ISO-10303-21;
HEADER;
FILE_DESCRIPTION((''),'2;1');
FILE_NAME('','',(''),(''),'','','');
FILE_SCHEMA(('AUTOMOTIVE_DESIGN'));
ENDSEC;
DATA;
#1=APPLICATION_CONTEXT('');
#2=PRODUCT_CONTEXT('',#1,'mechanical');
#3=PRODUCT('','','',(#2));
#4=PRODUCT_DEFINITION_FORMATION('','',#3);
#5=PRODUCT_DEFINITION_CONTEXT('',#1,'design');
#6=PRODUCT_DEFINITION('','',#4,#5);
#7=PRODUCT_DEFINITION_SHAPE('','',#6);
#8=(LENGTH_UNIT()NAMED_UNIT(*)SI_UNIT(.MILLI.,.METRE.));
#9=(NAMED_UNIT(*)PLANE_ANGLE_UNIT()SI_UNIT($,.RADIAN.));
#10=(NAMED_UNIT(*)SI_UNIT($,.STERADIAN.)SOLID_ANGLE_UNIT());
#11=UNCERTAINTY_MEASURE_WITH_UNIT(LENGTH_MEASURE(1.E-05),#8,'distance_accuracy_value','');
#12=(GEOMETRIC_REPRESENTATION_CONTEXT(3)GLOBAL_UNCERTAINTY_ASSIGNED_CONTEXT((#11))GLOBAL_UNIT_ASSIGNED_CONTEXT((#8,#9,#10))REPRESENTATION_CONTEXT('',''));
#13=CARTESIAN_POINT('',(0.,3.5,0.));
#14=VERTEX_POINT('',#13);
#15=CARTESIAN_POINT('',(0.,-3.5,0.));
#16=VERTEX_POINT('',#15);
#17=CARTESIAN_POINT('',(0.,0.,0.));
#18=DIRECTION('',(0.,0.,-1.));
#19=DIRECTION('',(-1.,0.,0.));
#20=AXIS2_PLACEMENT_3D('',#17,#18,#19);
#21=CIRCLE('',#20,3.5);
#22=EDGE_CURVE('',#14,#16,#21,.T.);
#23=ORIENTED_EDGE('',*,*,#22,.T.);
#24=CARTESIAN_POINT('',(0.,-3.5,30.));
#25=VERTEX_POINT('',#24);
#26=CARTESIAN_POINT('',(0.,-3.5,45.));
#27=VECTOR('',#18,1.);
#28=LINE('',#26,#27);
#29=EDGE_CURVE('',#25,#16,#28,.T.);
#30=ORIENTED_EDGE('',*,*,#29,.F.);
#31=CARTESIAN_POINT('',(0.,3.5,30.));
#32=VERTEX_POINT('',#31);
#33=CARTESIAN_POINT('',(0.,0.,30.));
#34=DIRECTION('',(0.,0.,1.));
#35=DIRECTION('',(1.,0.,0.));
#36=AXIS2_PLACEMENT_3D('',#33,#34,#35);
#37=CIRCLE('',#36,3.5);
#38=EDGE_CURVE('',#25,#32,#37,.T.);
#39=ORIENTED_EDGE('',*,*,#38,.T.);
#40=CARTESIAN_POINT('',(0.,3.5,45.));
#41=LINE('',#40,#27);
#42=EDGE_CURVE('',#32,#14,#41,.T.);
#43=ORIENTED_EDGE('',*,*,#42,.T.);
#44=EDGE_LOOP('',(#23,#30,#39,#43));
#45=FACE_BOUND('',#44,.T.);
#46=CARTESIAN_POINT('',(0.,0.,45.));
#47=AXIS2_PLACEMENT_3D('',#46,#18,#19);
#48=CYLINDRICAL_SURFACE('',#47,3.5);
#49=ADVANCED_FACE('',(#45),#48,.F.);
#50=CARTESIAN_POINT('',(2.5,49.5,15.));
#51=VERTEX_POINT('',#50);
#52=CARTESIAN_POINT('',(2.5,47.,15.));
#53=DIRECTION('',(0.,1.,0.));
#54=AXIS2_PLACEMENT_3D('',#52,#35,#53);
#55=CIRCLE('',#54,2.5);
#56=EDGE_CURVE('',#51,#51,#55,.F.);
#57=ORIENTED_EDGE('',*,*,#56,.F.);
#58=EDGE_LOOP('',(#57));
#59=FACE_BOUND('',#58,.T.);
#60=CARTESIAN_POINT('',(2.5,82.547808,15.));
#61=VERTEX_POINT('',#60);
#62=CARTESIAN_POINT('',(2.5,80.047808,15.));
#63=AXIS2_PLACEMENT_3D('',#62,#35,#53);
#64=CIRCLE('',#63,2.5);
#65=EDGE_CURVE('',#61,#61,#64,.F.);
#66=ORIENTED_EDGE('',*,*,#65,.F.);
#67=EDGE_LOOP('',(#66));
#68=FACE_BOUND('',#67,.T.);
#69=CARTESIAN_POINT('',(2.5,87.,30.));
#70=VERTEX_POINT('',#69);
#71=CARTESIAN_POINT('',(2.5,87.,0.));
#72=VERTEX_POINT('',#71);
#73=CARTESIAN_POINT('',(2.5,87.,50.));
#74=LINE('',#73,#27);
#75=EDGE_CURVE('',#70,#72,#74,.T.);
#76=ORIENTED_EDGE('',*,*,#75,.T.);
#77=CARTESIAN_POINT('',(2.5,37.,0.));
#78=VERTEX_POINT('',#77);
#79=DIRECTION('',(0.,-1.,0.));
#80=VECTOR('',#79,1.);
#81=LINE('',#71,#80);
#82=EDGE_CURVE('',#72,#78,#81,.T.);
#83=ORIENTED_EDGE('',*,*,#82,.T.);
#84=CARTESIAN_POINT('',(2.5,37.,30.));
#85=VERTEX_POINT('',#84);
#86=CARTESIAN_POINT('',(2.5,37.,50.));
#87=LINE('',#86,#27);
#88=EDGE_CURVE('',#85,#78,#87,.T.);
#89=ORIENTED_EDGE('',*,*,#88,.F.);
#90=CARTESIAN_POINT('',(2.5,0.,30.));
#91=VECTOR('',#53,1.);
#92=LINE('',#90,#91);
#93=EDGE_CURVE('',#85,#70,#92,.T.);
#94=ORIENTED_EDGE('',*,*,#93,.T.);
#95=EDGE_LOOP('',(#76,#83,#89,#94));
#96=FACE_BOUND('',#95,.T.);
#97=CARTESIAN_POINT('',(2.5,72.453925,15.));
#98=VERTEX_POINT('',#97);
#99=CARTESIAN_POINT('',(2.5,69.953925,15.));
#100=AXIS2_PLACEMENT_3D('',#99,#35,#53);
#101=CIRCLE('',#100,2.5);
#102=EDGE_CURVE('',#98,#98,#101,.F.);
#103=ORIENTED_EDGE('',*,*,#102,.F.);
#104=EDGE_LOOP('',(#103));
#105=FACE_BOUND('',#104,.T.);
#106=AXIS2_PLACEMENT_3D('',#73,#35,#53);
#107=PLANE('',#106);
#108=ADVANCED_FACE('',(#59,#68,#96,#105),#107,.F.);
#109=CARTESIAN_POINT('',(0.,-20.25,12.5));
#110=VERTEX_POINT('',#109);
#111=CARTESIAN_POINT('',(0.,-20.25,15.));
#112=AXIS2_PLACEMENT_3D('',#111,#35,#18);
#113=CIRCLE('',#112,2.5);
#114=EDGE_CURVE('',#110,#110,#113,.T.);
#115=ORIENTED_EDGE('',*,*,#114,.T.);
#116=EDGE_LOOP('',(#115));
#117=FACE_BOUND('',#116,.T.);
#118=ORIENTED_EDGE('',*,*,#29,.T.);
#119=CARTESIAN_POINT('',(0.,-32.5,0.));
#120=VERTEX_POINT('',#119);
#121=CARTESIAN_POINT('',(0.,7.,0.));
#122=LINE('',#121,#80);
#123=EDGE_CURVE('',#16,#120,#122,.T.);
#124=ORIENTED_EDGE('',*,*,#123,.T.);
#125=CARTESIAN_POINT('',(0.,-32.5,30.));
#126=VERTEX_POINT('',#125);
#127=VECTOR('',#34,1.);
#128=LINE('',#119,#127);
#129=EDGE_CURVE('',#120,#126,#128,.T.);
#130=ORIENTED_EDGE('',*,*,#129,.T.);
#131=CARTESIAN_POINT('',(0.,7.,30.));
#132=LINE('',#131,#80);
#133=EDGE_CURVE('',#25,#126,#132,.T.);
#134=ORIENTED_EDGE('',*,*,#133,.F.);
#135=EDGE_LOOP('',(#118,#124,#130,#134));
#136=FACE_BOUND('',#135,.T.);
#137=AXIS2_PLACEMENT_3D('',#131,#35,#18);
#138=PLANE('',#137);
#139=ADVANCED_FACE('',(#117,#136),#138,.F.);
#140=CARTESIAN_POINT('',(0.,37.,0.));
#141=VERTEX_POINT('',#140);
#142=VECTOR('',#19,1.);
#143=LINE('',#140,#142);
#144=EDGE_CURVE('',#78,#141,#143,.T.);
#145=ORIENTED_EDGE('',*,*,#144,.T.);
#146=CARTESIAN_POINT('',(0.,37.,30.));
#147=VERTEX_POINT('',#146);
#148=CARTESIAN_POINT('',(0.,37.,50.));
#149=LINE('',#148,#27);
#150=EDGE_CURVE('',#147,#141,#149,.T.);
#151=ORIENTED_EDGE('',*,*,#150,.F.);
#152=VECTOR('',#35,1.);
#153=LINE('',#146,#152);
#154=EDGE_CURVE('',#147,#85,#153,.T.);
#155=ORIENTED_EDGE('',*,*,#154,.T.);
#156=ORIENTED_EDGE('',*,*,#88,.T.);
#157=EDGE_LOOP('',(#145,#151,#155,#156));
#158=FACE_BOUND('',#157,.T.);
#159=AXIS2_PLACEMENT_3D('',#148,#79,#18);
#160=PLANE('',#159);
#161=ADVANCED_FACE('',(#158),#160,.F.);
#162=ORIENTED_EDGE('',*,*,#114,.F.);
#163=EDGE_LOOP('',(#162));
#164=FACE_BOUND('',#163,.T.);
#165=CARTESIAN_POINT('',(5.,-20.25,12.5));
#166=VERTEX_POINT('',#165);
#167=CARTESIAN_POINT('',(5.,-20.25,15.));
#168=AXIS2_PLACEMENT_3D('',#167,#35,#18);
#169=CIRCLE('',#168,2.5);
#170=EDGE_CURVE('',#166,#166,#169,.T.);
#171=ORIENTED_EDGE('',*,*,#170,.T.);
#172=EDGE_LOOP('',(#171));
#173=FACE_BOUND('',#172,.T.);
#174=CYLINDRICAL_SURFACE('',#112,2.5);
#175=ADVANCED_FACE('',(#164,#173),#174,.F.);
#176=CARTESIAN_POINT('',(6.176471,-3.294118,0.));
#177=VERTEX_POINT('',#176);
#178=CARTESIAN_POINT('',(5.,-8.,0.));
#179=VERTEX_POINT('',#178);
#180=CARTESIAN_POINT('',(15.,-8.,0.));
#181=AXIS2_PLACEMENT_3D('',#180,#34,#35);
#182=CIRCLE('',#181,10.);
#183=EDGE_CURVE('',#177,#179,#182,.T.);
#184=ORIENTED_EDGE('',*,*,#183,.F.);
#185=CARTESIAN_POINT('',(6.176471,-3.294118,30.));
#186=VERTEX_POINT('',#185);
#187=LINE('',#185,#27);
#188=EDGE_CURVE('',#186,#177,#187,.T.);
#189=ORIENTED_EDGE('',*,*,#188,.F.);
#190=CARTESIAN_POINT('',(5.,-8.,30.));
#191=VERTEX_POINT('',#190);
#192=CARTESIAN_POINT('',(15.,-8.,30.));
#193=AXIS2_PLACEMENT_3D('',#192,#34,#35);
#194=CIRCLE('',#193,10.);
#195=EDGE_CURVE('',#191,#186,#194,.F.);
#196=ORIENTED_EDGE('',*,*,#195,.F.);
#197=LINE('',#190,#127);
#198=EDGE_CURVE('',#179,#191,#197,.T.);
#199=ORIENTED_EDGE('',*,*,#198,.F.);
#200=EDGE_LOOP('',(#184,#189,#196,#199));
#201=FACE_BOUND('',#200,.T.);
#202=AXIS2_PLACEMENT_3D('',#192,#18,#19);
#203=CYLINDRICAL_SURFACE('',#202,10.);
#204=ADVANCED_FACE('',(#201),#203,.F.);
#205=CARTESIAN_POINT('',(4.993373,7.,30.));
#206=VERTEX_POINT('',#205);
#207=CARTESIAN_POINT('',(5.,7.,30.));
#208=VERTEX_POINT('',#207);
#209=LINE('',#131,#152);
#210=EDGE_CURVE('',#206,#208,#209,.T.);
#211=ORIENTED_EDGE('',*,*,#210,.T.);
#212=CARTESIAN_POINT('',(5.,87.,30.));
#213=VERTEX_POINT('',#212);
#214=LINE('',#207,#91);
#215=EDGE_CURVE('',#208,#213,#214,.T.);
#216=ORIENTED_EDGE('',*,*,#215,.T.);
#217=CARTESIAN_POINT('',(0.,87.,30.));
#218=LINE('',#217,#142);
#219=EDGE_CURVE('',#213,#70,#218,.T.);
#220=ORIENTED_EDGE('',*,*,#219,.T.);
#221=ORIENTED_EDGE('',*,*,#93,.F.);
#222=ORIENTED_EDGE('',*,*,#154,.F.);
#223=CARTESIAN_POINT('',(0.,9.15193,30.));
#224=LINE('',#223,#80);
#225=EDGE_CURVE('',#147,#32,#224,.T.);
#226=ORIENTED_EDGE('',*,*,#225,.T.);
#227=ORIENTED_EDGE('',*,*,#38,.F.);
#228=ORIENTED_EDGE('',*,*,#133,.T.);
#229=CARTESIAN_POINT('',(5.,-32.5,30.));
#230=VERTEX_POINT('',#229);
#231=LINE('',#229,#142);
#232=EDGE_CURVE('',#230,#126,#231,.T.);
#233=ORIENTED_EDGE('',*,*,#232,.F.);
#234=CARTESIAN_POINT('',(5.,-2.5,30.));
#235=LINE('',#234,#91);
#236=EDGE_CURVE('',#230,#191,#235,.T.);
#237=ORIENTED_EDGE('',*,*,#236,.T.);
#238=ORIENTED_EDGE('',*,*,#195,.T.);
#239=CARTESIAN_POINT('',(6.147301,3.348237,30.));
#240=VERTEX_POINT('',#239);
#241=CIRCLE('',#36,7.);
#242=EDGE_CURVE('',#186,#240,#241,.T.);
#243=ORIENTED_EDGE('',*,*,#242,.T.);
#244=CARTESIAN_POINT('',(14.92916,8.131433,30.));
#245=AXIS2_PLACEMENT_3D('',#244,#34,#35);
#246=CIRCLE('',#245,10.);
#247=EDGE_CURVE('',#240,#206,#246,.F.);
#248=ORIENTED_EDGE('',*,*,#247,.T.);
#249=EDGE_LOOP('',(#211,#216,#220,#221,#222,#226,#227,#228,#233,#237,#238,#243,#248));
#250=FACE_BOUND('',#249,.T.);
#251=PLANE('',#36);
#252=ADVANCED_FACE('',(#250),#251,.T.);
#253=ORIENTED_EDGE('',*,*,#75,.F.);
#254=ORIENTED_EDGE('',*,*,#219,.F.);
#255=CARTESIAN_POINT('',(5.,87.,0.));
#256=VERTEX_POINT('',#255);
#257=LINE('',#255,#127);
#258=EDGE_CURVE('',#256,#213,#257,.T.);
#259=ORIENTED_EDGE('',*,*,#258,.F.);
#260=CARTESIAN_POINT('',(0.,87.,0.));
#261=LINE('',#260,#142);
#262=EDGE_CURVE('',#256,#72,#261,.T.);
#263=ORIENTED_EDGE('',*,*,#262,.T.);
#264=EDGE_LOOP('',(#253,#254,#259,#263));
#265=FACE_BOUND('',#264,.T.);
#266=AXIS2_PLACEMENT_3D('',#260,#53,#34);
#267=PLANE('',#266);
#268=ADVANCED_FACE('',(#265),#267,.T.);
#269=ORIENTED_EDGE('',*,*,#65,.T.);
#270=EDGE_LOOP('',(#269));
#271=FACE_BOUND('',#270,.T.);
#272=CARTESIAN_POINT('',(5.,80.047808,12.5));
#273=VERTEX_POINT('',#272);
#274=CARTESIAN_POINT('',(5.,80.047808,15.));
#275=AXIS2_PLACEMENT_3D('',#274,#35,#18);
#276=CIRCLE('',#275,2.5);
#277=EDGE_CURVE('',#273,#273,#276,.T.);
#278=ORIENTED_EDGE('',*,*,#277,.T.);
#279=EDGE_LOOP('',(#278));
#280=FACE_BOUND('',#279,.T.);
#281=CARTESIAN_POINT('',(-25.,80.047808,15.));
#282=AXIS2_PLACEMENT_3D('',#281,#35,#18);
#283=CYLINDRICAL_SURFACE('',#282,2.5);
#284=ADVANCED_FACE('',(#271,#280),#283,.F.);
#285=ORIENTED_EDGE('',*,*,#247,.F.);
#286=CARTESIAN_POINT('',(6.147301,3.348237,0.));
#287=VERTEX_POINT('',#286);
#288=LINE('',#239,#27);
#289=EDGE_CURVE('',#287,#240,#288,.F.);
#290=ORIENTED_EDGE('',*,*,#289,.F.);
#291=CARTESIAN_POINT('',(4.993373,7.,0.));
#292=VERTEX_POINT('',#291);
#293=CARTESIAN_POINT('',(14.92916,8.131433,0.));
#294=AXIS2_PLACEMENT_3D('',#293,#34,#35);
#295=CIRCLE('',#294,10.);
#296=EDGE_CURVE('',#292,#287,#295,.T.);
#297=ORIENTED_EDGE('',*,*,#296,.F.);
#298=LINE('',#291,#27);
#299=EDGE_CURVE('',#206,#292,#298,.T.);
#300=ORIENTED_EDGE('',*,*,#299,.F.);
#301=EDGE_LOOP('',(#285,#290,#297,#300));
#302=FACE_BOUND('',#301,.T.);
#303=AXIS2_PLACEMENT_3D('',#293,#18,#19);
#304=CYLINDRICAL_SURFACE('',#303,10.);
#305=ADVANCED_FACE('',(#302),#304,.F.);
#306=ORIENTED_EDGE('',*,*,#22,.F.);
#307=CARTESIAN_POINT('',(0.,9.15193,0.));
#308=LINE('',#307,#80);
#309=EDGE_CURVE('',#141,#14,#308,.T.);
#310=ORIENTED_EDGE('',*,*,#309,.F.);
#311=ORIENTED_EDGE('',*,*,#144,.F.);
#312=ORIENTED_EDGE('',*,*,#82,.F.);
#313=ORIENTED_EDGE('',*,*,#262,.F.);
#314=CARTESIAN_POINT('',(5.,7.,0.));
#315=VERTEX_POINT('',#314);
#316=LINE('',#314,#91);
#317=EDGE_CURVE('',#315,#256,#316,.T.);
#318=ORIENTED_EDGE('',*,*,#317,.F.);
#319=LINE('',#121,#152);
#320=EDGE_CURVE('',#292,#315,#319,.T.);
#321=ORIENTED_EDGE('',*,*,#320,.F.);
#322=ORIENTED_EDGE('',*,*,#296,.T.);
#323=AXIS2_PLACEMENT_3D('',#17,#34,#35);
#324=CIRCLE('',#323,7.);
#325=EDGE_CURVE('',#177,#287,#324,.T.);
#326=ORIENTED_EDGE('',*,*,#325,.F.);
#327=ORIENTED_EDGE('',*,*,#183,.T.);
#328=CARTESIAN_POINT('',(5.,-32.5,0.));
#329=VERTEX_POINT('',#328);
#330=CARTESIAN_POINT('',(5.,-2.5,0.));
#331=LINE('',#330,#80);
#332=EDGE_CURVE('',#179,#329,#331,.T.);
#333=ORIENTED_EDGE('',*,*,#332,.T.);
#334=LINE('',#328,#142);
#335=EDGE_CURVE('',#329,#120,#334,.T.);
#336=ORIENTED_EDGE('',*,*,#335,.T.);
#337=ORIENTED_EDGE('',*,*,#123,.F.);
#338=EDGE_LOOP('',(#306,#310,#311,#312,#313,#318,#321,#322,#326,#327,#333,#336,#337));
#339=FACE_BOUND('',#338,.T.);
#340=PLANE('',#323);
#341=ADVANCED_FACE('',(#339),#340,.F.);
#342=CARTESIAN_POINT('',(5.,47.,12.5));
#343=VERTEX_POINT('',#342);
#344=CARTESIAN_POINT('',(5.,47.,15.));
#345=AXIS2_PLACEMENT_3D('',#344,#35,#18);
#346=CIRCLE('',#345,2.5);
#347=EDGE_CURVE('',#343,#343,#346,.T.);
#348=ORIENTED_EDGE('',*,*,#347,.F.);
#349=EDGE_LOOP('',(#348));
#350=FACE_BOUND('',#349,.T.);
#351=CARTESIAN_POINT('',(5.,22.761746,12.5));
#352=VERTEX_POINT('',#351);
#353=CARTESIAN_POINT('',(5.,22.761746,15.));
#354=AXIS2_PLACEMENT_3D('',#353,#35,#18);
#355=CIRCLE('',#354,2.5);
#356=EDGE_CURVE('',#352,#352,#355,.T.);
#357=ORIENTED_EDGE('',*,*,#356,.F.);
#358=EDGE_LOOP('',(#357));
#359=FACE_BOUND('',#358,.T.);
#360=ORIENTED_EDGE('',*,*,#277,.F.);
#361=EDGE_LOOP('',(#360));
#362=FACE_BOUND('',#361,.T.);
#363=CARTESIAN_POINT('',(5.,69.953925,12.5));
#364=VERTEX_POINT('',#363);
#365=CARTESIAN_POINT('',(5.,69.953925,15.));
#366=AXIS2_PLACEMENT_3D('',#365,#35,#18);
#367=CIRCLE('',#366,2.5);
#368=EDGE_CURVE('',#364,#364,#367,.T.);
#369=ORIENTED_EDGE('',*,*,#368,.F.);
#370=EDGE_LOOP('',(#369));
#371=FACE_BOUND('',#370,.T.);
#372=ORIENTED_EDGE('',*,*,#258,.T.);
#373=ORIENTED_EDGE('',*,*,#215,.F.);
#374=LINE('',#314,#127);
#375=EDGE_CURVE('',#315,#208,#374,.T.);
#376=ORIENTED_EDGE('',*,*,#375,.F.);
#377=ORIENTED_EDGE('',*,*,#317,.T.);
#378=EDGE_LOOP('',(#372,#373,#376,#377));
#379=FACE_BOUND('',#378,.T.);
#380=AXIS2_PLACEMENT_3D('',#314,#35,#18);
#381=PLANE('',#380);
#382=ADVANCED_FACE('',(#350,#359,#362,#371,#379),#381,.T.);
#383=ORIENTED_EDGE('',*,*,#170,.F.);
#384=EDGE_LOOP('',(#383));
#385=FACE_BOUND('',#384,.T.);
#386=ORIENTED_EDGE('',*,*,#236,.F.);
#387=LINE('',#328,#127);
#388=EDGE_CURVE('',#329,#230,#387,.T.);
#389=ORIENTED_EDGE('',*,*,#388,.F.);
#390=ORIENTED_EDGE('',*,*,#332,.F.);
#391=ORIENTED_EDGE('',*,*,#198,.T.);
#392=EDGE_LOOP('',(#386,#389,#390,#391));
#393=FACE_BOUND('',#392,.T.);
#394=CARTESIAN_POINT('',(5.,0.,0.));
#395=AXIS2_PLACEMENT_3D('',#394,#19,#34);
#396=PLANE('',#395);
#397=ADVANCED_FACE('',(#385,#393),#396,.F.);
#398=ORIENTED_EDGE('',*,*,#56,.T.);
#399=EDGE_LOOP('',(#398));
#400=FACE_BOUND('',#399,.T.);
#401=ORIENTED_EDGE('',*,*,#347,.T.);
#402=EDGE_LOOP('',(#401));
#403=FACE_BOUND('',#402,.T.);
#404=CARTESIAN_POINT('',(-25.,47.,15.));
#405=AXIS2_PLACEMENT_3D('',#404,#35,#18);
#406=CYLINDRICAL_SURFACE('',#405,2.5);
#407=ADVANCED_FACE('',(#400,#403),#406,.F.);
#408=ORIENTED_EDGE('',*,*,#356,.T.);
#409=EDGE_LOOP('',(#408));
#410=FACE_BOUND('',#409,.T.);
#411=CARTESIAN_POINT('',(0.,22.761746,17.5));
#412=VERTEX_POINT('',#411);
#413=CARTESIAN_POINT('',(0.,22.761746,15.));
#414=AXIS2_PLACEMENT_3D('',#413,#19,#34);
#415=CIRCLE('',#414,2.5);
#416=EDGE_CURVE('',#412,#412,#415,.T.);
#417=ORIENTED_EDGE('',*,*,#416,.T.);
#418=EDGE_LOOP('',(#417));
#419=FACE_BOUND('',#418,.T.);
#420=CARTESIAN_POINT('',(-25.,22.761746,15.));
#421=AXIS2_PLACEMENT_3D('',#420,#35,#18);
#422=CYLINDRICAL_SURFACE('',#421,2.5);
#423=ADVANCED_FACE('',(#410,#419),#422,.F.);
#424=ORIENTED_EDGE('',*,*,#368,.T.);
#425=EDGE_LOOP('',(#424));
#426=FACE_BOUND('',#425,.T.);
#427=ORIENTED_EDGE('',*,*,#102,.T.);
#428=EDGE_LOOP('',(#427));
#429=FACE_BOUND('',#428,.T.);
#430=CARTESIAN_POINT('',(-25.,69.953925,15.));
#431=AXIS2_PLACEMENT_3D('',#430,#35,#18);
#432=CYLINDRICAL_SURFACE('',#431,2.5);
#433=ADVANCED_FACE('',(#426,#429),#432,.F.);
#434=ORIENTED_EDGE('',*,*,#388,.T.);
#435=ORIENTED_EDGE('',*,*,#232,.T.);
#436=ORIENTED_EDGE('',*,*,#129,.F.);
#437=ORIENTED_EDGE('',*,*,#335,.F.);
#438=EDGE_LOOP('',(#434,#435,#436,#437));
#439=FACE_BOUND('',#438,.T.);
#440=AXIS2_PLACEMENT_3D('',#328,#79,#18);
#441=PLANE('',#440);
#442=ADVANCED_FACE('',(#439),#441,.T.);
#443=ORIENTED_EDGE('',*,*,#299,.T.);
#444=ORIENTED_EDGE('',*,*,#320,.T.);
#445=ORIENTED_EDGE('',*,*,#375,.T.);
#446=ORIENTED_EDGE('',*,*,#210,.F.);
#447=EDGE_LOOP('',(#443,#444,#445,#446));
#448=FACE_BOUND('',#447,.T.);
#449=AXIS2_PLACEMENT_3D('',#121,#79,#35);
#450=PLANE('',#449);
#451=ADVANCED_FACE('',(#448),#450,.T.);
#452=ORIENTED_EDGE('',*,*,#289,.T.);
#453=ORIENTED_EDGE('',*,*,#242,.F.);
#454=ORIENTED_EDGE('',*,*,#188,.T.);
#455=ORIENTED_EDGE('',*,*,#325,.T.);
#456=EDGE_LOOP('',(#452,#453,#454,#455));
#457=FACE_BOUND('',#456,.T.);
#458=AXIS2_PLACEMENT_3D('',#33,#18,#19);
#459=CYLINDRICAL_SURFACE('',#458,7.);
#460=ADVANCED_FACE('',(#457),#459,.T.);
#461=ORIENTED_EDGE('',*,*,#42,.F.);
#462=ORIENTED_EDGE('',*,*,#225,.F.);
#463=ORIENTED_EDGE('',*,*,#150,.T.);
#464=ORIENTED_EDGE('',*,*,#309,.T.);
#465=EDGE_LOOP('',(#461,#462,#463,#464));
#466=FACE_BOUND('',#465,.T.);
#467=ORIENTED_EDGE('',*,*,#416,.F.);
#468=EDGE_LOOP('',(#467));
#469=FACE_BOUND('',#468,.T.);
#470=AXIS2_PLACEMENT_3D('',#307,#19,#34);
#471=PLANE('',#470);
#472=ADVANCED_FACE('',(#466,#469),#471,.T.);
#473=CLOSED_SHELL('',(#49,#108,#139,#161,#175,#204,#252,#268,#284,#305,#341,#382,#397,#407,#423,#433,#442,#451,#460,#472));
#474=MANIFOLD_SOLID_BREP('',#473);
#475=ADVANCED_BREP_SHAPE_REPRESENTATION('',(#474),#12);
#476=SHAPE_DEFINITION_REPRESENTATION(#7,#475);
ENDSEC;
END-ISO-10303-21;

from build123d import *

# Parameters (mm, degrees)
SKETCH1_R           = 7
SKETCH1_R_2         = 2.5
BOSS_EXTRUDE1_DEPTH = 30
SKETCH2_W           = 5
SKETCH2_H           = 80
BOSS_EXTRUDE2_DEPTH = 30
SKETCH3_W           = 4.993372703
SKETCH3_H           = 5.857886356
BOSS_EXTRUDE3_DEPTH = 30
FILLET1_R           = 10
SKETCH4_R           = 2.5
CUT_EXTRUDE1_DEPTH  = 30
SKETCH5_W           = 18.483603476
SKETCH5_H           = 15.568617645
CUT_EXTRUDE2_DEPTH  = 30
SKETCH6_W           = 30
SKETCH6_H           = 30
BOSS_EXTRUDE4_DEPTH = 5
FILLET2_R           = 10
SKETCH7_R           = 2.5
CUT_EXTRUDE3_DEPTH  = 5
SKETCH8_R           = 3.5
CUT_EXTRUDE4_DEPTH  = 45
SKETCH9_W           = 2.5
SKETCH9_H           = 50
CUT_EXTRUDE5_DEPTH  = 50


with BuildPart() as part:
    # Sketch1 → Boss-Extrude1 (new body)
    with BuildSketch(Plane.XY):
        Circle(SKETCH1_R)
        Circle(SKETCH1_R_2, mode=Mode.SUBTRACT)
    extrude(amount=BOSS_EXTRUDE1_DEPTH)



with BuildPart() as body_2:
    # Sketch2 → Boss-Extrude2 (new body)
    with BuildSketch(Plane.XY.offset(30)):
        with Locations((2.5, 47)):
            Rectangle(SKETCH2_W, SKETCH2_H)
    extrude(amount=-BOSS_EXTRUDE2_DEPTH)


with BuildPart() as part_1:
    add(part.part)

    add(body_2.part)  # Boss-Extrude3 merges body 2
    # Sketch3 → Boss-Extrude3 (add)
    with BuildSketch(Plane.XY.offset(30)):
        with Locations((2.496686352, 6.222987156)):
            Rectangle(SKETCH3_W, SKETCH3_H)
    extrude(amount=-BOSS_EXTRUDE3_DEPTH)

    # Fillet1
    # the kernel refuses this fillet: 10 mm, written as the material it adds along each edge
    with BuildSketch(Plane(origin=(4.993372703, 4.905734302, 30), x_dir=(0.5953030074324868, -0.8035012939266724, 0), z_dir=(0, 0, -1))) as fillet1_piece_1:
        with BuildLine():
            CenterArc((3.322951104, -9.903685446), FILLET1_R, 97.958528589, 22.079165002)
            Line((-1.682745198, -1.246722668), (-1.782859124, -1.073583413))
            ThreePointArc((-1.782859124, -1.073583413), (-0.9604332, -0.462661075), (-0.119060601, 0.160700259))
            Line((-0.119060601, 0.160700259), (0.027691259, 0.198073709))
            ThreePointArc((0.027691259, 0.198073709), (0.969194072, 0.132579812), (1.910696885, 0.198073709))
            Line((1.910696885, 0.198073709), (1.938388144, 0))
        make_face()
    extrude(amount=30)

    # Sketch4 → Cut-Extrude1 (cut)
    with BuildSketch(Plane(origin=(5, 0, 0), x_dir=(0, 0, -1), z_dir=(1, 0, 0))):
        with Locations((-15, 22.761745694)):
            Circle(SKETCH4_R)
        with Locations((-15, 47)):
            Circle(SKETCH4_R)
        with Locations((-15, 69.953924783)):
            Circle(SKETCH4_R)
        with Locations((-15, 80.047807532)):
            Circle(SKETCH4_R)
    extrude(amount=-CUT_EXTRUDE1_DEPTH, mode=Mode.SUBTRACT)

    # Sketch5 → Cut-Extrude2 (cut)
    with BuildSketch(Plane(origin=(0, 0, 0), x_dir=(-1, 0, 0), z_dir=(0, 0, -1))):
        with Locations((9.241801738, -0.784308822)):
            Rectangle(SKETCH5_W, SKETCH5_H)
    extrude(amount=-CUT_EXTRUDE2_DEPTH, mode=Mode.SUBTRACT)

    # Sketch6 → Boss-Extrude4 (add)
    with BuildSketch(Plane.ZY):
        with Locations((15, -17.5)):
            Rectangle(SKETCH6_W, SKETCH6_H)
    extrude(amount=-BOSS_EXTRUDE4_DEPTH)

    # Fillet2
    fillet2_edges = [part_1.edges().sort_by_distance(p)[0] for p in [
        (5, -4.898979486, 15),
    ]]
    fillet(fillet2_edges, radius=FILLET2_R)

    # Sketch7 → Cut-Extrude3 (cut)
    with BuildSketch(Plane(origin=(5, 0, 0), x_dir=(0, 0, -1), z_dir=(1, 0, 0))):
        with Locations((-15, -20.25)):
            Circle(SKETCH7_R)
    extrude(amount=-CUT_EXTRUDE3_DEPTH, mode=Mode.SUBTRACT)

    # Sketch8 → Cut-Extrude4 (cut)
    with BuildSketch(Plane(origin=(0, 0, 0), x_dir=(-1, 0, 0), z_dir=(0, 0, -1))):
        Circle(SKETCH8_R)
    extrude(amount=-CUT_EXTRUDE4_DEPTH, mode=Mode.SUBTRACT)

    # Sketch9 → Cut-Extrude5 (cut)
    with BuildSketch(Plane(origin=(0, 0, 0), x_dir=(-1, 0, 0), z_dir=(0, 0, -1))):
        with Locations((-1.25, 62)):
            Rectangle(SKETCH9_W, SKETCH9_H)
    extrude(amount=-CUT_EXTRUDE5_DEPTH, mode=Mode.SUBTRACT)


solid = part_1.part
